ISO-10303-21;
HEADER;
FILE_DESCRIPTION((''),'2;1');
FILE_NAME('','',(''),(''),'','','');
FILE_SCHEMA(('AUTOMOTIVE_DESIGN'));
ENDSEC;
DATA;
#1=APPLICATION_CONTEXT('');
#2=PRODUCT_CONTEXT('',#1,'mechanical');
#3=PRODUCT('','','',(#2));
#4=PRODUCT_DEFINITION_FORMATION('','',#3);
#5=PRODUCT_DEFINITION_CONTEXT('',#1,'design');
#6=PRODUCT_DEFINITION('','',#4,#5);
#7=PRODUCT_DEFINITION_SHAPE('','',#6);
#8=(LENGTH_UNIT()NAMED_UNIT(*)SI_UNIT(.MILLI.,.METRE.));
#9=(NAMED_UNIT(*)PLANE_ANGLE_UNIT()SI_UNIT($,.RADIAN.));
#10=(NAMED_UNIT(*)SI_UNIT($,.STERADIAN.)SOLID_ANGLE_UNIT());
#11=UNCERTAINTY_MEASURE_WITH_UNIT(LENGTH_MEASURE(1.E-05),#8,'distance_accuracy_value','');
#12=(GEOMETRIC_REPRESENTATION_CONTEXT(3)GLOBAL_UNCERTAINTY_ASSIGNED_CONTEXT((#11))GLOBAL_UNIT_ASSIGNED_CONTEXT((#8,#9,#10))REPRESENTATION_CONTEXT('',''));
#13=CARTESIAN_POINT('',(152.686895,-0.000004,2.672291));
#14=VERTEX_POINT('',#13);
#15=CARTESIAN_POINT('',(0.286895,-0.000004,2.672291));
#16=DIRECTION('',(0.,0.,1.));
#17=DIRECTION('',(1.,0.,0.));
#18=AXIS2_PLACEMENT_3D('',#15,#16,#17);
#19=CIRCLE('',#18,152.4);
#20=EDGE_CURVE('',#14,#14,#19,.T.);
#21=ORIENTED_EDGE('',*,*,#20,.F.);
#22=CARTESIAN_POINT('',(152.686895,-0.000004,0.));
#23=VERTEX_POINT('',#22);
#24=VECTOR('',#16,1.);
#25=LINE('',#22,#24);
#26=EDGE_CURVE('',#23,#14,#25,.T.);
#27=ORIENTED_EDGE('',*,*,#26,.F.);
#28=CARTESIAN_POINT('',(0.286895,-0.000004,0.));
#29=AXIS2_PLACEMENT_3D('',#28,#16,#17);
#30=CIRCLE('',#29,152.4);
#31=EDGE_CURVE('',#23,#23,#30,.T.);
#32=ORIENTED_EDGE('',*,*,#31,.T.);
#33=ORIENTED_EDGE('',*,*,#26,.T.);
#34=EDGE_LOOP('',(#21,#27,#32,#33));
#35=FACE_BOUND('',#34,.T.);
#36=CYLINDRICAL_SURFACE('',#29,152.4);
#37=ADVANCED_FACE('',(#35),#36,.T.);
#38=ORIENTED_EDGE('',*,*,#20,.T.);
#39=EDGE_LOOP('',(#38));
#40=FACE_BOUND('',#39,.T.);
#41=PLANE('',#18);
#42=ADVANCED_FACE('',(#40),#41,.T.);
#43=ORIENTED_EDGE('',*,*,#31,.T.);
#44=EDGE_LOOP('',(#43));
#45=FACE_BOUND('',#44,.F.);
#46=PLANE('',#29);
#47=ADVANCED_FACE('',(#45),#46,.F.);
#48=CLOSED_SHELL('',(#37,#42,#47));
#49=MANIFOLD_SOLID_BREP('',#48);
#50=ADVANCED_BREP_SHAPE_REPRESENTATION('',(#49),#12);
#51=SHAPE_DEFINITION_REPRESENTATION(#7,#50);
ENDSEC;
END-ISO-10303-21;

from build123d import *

# Parameters (mm, degrees)
F0_R = 152.4


# Not quite as in the source:
# - the program builds the solid bodies; features that only make, move or delete a surface that nothing else refers to are left out


with BuildPart() as f2:
    # F2: sweep along a path in F1
    with BuildLine(Plane.XZ) as f2_path:
        Line((0, 0), (0, 2.6722908951))
    # F0 (on Top) → F2 (sweep)
    with BuildSketch(Plane.XY):
        with Locations((0.2868945012, -3.5133e-06)):
            Circle(F0_R)
    sweep(path=f2_path.line)


solid = f2.part
